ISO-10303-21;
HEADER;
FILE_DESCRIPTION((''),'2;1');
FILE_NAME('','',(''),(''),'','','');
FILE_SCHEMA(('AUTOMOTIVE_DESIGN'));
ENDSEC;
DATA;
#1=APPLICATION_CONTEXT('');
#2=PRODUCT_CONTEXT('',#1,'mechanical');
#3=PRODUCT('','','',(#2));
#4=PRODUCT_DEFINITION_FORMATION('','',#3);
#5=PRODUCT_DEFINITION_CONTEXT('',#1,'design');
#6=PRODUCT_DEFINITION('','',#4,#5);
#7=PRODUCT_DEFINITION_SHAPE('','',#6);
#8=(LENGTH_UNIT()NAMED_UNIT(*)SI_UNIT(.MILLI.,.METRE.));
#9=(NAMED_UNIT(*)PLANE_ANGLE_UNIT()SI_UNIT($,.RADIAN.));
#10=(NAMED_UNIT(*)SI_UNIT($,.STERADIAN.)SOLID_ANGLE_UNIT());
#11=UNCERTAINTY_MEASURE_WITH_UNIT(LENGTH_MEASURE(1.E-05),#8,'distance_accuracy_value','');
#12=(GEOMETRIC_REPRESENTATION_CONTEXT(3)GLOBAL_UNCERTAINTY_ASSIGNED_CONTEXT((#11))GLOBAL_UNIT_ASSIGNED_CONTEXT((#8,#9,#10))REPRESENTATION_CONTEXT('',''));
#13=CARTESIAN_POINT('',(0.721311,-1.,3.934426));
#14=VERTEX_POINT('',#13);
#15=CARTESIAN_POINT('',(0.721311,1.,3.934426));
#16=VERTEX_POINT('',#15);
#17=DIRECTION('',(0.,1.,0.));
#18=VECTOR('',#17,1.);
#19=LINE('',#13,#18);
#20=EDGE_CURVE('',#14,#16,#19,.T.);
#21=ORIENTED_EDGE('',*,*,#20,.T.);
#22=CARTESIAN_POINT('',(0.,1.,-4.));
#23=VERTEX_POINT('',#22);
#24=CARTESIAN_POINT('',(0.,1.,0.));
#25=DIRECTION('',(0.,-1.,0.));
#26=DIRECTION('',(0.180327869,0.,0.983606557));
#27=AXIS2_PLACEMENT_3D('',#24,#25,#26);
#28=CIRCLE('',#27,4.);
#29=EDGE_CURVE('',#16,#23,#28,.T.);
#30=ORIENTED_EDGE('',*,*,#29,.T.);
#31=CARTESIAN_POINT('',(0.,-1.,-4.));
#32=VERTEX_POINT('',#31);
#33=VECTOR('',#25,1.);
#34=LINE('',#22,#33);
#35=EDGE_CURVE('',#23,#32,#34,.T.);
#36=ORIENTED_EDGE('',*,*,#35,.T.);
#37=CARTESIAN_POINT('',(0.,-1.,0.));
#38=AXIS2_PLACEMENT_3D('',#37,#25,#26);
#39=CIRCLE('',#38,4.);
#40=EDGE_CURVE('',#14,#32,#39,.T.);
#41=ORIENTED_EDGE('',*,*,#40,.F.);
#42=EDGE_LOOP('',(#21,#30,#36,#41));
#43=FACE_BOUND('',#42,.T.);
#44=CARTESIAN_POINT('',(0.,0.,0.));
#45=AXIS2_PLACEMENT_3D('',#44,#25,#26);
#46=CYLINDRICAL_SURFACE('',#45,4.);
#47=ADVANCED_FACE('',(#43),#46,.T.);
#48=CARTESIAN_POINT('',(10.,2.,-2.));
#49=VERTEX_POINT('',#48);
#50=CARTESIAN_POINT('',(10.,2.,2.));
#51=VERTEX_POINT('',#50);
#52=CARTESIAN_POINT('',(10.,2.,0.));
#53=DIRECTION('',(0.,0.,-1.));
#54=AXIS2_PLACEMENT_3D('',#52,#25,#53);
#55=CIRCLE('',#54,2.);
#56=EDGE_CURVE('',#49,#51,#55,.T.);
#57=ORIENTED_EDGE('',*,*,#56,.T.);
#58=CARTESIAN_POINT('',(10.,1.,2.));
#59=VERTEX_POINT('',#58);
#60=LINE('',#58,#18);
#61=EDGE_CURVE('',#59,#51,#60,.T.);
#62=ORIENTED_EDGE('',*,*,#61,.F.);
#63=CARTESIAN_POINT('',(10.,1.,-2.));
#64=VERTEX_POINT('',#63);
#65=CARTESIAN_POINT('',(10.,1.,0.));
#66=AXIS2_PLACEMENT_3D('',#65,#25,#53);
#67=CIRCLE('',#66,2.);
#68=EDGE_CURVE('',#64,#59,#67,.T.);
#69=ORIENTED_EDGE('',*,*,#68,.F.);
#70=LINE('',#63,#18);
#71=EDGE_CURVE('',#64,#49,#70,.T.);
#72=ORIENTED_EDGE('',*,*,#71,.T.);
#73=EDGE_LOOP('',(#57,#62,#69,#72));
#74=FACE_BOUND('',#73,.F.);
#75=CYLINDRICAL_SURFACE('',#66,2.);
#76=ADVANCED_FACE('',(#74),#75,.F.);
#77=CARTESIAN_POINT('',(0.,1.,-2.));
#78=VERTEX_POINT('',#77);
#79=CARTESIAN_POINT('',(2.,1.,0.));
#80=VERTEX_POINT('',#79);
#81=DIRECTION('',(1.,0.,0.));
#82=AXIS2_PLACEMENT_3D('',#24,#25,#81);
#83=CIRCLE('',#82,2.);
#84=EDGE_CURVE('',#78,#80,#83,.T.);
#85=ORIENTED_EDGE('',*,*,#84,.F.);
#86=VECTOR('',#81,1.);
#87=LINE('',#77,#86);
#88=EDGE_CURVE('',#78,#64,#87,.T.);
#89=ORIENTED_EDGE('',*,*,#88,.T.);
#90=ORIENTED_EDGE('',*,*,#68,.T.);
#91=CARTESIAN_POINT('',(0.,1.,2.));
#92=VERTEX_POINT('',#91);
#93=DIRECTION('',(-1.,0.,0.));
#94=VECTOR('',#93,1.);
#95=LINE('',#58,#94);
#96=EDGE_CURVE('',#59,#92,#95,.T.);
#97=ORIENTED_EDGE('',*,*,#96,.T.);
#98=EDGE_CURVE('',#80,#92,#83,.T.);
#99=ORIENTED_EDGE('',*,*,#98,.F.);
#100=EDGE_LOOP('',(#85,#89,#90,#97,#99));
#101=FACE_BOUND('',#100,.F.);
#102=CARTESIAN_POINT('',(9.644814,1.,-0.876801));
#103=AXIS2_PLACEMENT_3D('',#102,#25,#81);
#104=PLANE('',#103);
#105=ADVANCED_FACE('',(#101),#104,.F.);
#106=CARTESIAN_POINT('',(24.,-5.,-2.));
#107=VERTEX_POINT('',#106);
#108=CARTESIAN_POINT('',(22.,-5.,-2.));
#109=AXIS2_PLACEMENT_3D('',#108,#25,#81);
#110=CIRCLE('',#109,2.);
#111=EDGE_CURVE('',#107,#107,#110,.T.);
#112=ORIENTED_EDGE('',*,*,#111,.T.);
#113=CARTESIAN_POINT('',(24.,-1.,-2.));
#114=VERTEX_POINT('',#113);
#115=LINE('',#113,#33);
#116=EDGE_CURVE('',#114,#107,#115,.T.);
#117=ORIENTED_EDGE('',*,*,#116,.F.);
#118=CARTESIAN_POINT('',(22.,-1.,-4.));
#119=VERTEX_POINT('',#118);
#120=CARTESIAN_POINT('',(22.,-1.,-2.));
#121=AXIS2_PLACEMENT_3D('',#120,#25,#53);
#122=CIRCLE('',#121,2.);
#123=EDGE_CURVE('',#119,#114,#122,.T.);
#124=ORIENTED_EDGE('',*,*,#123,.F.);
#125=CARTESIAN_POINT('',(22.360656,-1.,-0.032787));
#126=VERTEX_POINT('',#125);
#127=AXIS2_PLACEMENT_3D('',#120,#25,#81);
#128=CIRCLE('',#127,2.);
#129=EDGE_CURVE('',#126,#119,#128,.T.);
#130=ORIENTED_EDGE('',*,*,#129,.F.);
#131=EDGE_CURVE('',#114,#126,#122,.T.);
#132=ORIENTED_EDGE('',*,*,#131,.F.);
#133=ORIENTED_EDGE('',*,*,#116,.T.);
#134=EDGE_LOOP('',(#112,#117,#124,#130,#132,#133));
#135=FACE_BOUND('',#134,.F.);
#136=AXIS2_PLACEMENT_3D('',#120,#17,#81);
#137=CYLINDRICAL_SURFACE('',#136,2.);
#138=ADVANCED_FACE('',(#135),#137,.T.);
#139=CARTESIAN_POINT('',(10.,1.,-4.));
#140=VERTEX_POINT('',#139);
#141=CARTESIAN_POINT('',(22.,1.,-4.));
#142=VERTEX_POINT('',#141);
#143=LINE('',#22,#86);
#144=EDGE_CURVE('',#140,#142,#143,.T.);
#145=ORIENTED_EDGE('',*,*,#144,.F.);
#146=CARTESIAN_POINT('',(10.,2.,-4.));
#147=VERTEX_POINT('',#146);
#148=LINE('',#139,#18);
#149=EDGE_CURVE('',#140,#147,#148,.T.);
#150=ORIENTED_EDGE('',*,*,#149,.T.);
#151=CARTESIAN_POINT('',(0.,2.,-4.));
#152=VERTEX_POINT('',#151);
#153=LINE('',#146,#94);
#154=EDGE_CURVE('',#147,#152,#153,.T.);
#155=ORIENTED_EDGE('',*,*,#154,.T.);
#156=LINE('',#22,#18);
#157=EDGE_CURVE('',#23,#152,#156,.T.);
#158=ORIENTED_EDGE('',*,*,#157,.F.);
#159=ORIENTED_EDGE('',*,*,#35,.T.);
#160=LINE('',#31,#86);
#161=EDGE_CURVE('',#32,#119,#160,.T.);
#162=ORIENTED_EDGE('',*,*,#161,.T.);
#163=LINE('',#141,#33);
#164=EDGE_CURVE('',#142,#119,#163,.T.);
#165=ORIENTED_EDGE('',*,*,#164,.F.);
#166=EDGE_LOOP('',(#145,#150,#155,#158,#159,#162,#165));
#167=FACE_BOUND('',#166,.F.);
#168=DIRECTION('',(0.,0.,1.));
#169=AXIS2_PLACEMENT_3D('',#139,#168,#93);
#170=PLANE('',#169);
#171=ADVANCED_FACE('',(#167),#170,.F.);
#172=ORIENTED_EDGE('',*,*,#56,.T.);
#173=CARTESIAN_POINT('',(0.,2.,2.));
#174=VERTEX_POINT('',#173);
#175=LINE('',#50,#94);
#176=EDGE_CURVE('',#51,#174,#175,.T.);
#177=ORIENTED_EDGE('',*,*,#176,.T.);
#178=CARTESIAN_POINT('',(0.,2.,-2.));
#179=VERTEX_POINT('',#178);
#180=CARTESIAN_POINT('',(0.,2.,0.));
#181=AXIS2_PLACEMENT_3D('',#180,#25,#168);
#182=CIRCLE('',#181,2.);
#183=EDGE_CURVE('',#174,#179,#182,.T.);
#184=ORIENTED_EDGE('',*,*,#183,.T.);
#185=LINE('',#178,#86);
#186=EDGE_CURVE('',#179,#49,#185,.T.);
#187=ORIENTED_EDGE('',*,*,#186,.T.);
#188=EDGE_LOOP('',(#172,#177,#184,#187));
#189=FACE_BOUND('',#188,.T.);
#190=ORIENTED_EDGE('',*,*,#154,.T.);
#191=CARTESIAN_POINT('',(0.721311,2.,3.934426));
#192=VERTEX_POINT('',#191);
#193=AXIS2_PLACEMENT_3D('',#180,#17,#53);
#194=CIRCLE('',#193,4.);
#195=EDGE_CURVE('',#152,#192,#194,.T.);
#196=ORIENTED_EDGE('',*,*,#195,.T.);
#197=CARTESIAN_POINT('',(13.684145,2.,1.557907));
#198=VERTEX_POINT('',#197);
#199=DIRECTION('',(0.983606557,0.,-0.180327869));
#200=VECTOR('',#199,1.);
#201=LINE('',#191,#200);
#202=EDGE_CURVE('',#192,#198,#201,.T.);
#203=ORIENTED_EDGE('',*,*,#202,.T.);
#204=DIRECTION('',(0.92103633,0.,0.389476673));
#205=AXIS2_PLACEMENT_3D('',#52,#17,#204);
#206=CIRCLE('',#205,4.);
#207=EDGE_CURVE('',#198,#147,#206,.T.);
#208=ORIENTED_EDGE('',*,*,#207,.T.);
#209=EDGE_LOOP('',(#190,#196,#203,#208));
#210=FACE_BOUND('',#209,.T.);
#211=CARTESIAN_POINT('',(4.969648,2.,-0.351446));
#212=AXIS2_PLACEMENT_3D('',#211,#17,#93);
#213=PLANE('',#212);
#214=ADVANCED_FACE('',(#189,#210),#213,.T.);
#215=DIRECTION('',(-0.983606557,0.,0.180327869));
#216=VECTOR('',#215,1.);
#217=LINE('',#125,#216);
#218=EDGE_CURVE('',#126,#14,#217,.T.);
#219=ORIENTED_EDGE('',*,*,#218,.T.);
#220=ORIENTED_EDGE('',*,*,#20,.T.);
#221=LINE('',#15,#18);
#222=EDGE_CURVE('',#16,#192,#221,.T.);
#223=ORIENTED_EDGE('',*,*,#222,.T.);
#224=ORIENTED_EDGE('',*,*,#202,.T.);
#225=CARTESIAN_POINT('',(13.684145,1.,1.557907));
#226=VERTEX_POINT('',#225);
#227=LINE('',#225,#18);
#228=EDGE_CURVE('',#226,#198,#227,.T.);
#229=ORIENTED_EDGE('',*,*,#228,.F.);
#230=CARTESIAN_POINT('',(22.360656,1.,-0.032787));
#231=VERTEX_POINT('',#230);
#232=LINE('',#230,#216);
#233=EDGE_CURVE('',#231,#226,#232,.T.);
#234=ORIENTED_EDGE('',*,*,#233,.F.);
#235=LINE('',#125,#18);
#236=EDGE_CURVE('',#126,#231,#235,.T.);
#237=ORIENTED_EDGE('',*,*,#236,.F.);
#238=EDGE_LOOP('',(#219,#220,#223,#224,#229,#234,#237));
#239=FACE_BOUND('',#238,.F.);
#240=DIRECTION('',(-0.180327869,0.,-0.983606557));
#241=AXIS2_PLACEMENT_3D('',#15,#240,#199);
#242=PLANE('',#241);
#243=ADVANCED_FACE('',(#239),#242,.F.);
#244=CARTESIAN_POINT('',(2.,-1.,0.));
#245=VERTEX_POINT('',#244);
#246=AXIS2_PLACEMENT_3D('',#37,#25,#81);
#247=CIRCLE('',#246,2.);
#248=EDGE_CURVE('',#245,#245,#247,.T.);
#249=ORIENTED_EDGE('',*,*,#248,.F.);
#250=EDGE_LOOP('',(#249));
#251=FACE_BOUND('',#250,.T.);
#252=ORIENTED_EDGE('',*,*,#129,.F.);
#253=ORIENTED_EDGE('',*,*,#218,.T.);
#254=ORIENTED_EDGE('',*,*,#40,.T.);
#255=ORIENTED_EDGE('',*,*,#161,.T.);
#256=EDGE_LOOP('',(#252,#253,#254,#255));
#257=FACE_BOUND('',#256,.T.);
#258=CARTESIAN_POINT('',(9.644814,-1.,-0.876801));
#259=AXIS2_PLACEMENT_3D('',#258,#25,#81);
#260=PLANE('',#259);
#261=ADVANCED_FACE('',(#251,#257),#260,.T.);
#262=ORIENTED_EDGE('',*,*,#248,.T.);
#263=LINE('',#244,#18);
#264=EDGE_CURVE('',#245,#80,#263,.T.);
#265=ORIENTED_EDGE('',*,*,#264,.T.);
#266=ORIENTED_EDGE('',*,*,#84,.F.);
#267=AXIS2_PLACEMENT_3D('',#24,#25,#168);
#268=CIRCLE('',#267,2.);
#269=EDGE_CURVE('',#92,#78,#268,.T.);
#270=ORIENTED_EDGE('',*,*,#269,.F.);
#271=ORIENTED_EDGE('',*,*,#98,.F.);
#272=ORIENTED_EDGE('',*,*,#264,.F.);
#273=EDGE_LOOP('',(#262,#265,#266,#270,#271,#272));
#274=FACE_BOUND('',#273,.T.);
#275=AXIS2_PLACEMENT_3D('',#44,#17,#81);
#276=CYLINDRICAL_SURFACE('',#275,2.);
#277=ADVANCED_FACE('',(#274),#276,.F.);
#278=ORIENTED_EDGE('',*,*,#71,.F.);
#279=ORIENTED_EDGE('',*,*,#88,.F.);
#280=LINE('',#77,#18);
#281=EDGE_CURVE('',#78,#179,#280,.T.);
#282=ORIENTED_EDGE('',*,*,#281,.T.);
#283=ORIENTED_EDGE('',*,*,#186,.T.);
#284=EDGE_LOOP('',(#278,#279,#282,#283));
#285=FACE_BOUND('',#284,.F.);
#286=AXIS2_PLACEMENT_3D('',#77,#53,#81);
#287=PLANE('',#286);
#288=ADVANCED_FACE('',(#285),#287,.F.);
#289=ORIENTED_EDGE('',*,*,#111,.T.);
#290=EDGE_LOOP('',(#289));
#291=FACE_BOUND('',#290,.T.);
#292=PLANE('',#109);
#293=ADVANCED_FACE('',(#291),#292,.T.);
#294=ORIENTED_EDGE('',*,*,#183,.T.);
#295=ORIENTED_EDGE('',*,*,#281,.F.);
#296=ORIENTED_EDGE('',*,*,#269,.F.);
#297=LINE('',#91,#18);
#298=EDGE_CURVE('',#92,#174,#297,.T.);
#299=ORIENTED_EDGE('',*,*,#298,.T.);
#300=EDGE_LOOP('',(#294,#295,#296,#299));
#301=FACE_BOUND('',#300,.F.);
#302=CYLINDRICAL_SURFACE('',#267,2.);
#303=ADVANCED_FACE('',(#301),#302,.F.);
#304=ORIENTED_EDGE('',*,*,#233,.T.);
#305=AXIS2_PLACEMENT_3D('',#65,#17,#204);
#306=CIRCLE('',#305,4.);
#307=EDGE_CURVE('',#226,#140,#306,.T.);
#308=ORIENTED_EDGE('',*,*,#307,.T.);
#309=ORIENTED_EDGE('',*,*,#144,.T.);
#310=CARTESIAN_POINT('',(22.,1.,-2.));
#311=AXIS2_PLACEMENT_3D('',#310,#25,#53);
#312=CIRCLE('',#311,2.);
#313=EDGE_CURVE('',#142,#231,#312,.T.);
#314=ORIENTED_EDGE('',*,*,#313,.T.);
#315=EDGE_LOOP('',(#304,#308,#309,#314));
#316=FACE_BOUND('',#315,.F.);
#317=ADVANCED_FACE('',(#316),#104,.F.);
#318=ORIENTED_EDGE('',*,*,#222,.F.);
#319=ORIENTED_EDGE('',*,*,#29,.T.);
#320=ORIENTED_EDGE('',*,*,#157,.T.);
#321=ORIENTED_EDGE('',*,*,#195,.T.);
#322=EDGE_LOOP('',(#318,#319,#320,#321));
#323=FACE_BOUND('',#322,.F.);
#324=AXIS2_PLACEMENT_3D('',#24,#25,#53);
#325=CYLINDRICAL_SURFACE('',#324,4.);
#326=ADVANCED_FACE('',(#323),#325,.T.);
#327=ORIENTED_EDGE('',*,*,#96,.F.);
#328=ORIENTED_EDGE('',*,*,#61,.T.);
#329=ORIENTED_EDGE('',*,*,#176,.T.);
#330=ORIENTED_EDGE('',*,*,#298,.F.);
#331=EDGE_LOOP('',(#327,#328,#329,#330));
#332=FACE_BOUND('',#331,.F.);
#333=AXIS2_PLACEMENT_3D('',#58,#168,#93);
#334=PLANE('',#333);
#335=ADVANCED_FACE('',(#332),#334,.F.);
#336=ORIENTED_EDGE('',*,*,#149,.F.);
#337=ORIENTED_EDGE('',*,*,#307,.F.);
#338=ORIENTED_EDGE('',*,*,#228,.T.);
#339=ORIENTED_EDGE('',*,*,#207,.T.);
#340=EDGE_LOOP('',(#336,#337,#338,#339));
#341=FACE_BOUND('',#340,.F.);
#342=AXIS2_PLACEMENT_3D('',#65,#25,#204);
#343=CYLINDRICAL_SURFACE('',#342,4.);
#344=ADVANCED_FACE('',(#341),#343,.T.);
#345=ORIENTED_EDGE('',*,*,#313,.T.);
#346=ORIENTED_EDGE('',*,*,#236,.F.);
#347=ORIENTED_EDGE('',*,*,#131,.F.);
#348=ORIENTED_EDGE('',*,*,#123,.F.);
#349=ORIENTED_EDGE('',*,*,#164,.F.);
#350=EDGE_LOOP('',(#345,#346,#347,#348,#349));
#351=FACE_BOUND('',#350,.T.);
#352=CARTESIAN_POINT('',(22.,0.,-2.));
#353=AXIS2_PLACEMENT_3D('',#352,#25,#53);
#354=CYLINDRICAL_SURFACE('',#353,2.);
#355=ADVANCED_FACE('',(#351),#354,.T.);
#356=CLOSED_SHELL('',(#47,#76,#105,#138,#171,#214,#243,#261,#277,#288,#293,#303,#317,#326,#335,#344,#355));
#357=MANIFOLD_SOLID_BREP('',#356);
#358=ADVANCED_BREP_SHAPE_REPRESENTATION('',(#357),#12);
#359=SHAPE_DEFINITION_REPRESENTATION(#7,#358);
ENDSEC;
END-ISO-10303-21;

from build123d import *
from build123d import SkipClean  # not in build123d's __all__

# Parameters (mm, degrees)
F0_R     = 2
F1_DEPTH = 1
F2_R     = 2
F3_DEPTH = 4
F5_DEPTH = 1


# Not quite as in the source:
# - after a boolean that leaves OpenCascade's solid faulty, fix() repairs it


with BuildPart() as f1:
    # F0 (on Front) → F1 (new body, symmetric)
    with BuildSketch(Plane.XZ):
        with BuildLine():
            ThreePointArc((0.7213114754, 3.9344262295), (-3.9835728259, 0.3621429842), (0, -4))
            Line((0, -4), (22, -4))
            ThreePointArc((22, -4), (23.9917864129, -2.1810714921), (22.3606557377, -0.0327868852))
            Line((22.3606557377, -0.0327868852), (0.7213114754, 3.9344262295))
        make_face()
        Circle(F0_R, mode=Mode.SUBTRACT)
    extrude(amount=F1_DEPTH, both=True)

    # F2 (on face) → F3 (join)
    with BuildSketch(Plane.XZ.offset(1)):
        with Locations((22, -2)):
            Circle(F2_R)
    with SkipClean():  # cleaning this boolean's faces spoils the solid; the shape is the same uncleaned
        extrude(amount=F3_DEPTH)

    # F4 (on face) → F5 (join)
    with BuildSketch(Plane(origin=(0, 1, 0), x_dir=(-1, 0, 0), z_dir=(0, 1, 0))):
        with BuildLine():
            Line((-0.7213114754, 3.9344262295), (-13.6841453203, 1.5579066913))
            ThreePointArc((-13.6841453203, 1.5579066913), (-13.3340385994, -2.2100195966), (-10, -4))
            Line((-10, -4), (0, -4))
            ThreePointArc((0, -4), (3.9835728259, 0.3621429842), (-0.7213114754, 3.9344262295))
        make_face()
        with BuildLine():
            ThreePointArc((0, 2), (2, 0), (0, -2))
            Line((0, -2), (-10, -2))
            ThreePointArc((-10, -2), (-12, 0), (-10, 2))
            Line((-10, 2), (0, 2))
        make_face(mode=Mode.SUBTRACT)
    extrude(amount=F5_DEPTH)

    add(f1.part.fix(), mode=Mode.REPLACE)


solid = f1.part
